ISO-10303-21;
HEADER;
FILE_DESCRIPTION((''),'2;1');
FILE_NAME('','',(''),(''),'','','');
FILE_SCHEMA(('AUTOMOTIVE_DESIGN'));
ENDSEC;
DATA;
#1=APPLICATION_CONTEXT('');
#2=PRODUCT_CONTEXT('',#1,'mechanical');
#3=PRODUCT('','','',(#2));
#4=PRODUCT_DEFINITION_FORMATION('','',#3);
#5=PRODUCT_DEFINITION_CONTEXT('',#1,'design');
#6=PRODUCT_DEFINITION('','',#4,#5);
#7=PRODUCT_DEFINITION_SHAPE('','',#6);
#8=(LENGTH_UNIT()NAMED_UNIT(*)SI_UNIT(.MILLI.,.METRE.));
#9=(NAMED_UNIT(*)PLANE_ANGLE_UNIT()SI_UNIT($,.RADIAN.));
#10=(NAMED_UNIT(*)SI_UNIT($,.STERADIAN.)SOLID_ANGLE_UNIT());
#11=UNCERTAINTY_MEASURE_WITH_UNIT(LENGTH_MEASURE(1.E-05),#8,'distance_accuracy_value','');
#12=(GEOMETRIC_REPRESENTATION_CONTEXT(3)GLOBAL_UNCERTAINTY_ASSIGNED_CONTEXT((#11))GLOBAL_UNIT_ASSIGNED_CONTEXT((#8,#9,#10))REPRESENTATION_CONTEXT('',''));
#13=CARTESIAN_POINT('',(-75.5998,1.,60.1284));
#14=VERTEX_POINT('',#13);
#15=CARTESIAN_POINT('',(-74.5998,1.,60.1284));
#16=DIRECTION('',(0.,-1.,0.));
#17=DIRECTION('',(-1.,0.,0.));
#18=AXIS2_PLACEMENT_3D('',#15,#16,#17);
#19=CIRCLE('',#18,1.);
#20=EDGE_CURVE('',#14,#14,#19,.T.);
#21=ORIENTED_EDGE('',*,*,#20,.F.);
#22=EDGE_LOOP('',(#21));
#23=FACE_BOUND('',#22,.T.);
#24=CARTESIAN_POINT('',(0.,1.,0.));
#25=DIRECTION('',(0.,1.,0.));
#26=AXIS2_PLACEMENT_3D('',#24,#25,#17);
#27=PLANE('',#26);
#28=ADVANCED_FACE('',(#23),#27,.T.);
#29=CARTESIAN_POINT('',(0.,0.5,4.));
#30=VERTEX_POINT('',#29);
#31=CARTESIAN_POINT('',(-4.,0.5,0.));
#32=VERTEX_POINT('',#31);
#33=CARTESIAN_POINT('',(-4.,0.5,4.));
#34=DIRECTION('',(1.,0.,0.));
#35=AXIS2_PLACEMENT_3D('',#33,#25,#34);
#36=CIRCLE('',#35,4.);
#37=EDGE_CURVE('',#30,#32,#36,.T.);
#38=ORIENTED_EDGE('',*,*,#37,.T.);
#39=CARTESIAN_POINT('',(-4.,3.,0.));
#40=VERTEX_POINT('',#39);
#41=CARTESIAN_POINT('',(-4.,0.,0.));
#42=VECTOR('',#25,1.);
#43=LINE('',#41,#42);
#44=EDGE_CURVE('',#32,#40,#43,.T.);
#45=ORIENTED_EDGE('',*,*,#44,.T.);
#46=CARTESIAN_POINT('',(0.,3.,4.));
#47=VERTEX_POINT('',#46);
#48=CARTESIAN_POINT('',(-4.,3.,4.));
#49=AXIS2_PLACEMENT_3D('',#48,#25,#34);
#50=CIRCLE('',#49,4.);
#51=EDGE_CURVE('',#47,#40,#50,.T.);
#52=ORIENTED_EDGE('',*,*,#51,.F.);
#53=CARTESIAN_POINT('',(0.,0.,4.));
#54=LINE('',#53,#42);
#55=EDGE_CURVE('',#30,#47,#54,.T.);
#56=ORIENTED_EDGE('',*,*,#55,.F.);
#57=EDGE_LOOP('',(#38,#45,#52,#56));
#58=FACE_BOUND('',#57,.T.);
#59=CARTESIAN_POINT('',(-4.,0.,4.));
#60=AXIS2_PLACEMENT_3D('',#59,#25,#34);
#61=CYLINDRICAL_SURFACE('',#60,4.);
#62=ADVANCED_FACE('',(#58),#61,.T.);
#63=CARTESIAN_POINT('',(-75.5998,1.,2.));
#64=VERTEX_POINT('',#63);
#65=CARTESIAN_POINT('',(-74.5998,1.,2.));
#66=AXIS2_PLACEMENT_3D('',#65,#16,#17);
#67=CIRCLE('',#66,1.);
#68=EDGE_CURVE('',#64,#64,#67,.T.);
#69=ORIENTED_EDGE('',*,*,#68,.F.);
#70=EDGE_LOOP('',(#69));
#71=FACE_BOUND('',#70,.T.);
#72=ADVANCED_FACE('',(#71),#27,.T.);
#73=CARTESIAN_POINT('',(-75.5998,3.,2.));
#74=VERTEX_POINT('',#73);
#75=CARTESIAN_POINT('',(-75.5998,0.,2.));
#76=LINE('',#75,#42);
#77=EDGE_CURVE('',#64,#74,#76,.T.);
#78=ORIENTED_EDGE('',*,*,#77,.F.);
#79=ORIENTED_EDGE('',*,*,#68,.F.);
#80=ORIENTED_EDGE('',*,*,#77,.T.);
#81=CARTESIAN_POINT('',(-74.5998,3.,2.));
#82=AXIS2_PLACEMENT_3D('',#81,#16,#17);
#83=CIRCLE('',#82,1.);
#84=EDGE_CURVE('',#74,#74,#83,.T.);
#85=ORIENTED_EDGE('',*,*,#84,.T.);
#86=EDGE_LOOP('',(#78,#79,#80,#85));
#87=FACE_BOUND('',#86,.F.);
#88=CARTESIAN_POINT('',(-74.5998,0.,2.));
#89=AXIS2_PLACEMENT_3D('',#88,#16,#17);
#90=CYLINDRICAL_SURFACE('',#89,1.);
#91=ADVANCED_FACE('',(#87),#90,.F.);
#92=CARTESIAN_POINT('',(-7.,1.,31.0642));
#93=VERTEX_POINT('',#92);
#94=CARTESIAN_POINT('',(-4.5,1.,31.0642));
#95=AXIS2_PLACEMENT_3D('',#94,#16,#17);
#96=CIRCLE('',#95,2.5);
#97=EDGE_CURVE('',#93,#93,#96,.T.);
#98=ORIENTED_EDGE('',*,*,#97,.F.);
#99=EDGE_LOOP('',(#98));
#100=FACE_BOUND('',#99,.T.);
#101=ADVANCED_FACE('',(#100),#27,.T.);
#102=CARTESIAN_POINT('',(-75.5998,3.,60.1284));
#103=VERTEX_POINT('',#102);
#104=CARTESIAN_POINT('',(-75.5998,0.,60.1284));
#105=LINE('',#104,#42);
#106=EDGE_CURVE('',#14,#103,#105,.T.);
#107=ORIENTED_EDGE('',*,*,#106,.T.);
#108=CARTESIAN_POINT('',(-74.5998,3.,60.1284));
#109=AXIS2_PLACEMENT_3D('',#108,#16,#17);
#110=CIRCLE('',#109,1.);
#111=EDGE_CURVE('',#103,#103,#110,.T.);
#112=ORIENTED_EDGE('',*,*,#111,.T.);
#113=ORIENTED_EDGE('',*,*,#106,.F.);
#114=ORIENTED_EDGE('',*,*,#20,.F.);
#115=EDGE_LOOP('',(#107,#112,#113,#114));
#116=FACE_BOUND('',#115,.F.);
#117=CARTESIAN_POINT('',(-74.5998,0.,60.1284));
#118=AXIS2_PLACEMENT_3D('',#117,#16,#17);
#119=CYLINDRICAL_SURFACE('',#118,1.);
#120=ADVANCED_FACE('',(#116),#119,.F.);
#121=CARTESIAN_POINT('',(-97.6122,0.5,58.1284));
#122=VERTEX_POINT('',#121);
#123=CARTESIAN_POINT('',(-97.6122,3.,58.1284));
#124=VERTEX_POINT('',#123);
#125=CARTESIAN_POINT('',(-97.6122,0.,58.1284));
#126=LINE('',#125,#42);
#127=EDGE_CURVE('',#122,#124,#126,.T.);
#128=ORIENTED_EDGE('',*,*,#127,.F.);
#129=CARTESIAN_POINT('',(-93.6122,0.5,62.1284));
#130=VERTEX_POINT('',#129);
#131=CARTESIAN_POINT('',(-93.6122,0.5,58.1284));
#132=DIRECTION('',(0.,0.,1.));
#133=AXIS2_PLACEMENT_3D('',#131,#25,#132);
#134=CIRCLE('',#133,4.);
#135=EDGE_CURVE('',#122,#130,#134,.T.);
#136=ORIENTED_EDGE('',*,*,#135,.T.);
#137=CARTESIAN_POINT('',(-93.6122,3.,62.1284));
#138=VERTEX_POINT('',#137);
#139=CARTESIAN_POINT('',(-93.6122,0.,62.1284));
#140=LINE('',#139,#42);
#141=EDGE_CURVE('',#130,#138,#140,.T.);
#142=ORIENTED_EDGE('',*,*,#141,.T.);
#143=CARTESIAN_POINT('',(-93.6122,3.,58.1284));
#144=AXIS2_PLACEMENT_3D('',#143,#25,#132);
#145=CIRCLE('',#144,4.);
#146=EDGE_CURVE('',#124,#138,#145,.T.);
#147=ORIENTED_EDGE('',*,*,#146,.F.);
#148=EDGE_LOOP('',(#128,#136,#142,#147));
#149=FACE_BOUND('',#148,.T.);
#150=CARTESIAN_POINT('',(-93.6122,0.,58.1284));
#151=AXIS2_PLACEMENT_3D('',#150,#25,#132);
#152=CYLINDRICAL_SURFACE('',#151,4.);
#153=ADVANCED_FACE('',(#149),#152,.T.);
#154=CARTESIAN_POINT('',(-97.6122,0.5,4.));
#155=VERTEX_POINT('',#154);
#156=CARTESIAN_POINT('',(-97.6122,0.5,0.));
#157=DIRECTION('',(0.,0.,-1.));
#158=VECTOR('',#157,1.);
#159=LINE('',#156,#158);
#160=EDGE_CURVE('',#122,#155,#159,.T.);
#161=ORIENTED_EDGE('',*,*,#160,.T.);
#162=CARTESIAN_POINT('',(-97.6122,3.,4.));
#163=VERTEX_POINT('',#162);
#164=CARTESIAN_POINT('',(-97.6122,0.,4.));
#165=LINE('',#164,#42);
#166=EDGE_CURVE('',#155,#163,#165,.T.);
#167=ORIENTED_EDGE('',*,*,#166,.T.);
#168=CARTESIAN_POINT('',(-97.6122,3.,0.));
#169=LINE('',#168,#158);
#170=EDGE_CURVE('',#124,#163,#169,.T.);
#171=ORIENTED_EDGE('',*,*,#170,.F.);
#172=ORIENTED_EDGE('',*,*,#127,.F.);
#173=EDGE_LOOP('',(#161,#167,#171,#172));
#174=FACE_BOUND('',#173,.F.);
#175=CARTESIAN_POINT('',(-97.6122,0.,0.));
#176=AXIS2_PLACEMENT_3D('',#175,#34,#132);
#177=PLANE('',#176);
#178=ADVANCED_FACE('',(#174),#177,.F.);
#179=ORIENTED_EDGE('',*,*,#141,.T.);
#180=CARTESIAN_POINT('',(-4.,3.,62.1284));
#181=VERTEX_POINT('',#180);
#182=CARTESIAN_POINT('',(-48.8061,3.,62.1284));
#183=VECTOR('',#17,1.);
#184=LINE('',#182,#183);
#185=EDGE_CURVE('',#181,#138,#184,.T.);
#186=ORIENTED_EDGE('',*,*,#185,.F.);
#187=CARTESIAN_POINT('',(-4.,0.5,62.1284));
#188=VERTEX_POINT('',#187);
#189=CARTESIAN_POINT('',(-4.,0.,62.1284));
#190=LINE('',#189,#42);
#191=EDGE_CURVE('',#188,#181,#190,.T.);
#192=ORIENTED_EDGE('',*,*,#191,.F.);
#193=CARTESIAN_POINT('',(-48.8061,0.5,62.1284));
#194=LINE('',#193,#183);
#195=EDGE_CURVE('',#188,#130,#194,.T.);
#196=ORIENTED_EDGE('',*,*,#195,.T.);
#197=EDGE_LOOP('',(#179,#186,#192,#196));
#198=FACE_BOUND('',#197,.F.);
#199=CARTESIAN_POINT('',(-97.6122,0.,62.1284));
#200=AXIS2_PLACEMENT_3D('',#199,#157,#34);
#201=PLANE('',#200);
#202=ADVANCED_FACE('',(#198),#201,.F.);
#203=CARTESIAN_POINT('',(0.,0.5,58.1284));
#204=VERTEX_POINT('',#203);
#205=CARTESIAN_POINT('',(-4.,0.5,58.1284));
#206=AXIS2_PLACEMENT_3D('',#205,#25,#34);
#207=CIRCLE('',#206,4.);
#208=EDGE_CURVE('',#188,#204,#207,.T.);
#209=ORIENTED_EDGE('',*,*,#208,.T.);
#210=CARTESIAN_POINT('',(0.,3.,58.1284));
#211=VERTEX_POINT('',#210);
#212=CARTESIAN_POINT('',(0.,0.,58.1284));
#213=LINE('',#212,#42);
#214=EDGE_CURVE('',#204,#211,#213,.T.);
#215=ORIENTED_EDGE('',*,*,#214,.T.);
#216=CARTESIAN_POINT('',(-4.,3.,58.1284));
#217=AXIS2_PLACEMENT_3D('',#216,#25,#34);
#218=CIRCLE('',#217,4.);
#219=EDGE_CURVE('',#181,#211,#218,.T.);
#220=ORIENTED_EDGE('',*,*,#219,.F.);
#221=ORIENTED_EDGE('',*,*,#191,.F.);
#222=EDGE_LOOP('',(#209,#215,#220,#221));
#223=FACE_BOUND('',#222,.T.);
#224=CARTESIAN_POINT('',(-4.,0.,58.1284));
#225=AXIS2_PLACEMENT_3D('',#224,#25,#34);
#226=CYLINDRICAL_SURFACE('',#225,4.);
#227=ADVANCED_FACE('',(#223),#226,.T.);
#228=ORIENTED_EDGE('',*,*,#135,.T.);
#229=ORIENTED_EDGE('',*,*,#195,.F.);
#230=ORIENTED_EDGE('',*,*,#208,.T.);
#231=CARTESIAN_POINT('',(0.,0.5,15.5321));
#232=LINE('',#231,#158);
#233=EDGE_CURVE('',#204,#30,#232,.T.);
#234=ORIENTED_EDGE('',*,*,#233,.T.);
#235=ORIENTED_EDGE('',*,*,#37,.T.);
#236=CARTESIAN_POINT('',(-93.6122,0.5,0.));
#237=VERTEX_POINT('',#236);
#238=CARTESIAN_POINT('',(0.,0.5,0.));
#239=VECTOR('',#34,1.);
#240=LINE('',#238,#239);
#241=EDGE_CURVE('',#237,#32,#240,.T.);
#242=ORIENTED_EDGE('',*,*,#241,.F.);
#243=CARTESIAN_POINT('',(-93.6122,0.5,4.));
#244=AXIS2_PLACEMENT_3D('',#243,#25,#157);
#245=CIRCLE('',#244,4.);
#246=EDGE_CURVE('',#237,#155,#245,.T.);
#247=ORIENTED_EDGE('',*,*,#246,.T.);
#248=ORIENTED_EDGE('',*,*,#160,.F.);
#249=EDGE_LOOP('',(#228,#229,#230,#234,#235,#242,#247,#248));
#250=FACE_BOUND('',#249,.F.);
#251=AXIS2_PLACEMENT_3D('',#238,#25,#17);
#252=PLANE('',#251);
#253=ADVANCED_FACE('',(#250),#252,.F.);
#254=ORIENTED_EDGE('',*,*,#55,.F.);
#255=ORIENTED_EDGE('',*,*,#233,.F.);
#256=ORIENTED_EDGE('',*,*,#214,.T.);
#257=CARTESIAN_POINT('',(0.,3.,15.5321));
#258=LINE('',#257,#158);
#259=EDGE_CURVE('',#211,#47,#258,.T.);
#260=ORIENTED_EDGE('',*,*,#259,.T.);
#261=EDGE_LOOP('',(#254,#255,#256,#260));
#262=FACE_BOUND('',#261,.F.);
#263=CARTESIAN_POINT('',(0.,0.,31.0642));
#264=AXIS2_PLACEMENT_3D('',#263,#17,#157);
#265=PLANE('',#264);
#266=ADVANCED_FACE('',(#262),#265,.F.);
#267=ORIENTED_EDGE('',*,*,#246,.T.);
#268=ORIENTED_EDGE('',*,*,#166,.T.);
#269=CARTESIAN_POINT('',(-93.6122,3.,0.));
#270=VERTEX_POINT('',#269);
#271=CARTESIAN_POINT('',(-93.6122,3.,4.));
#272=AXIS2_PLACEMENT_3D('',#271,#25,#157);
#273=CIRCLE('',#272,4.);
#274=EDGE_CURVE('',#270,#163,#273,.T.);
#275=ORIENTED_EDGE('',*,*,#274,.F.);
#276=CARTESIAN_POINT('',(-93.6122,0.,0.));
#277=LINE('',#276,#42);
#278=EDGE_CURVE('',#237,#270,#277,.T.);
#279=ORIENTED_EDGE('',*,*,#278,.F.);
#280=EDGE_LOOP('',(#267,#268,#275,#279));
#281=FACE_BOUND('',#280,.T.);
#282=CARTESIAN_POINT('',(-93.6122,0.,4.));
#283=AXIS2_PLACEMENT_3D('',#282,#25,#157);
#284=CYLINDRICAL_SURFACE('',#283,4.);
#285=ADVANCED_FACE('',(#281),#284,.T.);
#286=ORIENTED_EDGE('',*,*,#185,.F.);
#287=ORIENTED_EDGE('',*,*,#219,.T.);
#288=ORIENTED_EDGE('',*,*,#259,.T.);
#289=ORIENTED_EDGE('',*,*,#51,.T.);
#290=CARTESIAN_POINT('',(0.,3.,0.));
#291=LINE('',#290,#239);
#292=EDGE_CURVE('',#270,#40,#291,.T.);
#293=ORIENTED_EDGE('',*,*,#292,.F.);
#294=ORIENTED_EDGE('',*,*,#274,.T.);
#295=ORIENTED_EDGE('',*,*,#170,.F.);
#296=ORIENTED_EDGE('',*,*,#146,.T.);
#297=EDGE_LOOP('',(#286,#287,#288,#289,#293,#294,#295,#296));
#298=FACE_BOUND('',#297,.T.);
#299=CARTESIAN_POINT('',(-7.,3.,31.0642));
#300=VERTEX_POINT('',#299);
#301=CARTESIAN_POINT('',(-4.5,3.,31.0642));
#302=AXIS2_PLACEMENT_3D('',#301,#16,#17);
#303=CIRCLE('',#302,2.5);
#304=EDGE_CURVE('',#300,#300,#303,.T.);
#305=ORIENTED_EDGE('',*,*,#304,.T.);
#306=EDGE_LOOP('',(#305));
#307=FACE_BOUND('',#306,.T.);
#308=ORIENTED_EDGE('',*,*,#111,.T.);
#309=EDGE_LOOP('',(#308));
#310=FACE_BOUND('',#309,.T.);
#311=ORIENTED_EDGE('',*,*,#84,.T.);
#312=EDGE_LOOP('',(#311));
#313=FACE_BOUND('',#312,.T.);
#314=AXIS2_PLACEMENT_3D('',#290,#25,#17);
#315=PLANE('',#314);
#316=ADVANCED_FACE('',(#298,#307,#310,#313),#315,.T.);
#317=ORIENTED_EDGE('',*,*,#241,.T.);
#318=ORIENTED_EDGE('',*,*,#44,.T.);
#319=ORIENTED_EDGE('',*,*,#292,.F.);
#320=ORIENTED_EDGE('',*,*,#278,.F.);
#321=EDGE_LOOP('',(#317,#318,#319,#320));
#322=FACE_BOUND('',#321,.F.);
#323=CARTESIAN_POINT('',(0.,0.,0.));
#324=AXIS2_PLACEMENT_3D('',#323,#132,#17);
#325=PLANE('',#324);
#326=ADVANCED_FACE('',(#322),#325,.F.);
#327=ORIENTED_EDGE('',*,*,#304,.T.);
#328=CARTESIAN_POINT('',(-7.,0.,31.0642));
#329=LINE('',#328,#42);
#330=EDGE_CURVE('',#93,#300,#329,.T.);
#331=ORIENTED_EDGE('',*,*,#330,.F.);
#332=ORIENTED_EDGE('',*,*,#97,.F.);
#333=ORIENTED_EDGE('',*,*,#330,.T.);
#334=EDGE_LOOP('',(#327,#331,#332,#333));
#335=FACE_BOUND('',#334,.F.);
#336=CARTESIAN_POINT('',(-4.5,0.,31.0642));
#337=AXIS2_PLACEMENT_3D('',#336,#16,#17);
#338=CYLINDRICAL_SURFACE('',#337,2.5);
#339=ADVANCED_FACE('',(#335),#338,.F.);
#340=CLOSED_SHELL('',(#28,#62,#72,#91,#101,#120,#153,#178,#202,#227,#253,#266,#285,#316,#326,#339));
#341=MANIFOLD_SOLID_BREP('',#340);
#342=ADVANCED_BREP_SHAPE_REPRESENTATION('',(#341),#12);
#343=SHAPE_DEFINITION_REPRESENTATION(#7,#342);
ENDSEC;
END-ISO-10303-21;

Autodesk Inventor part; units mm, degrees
ref_plane "YZ Plane" through (0, 0, 0) normal (1, 0, 0) x (0, 1, 0)
ref_plane "XZ Plane" through (0, 0, 0) normal (0, 1, 0) x (-1, 0, 0)
ref_plane "XY Plane" through (0, 0, 0) normal (0, 0, 1) x (1, 0, 0)
sketch "Sketch1" plane through (0, 0, 0) normal (0, 1, 0) x (-1, 0, 0)
  line L0 (0, 0) -> (97.6122, 0)
  line L1 (97.6122, 0) -> (97.6122, 62.1284)
  line L2 (97.6122, 62.1284) -> (0, 62.1284)
  line L3 (0, 62.1284) -> (0, 0)
  line L4 (97.6122, 62.1284) -> (97.6122, 60.1284)
  line L5 (97.6122, 60.1284) -> (74.5998, 60.1284)
  circle A0 centre (74.5998, 60.1284) radius 1
  line L6 (0, 31.0642) -> (4.5, 31.0642)
  circle A1 centre (4.5, 31.0642) radius 2.5
  line L7 (4.5, 31.0642) -> (97.6122, 31.0642)
  circle A2 centre (74.5998, 2) radius 1
  dimension "d0" = 97.6122
  dimension "d1" = 62.1284
  dimension "d2" = 2
  dimension "d3" = 23.0124
  dimension "d4" = 2
  dimension "d5" = 4.5
  dimension "d6" = 5
extrude "Extrusion1" add sketch "Sketch1" along normal blind 3 contours L3 L6 A1 L7 L1 L0 | L3 L2 L1 L7 A1 L6
extrude "Extrusion2" add sketch "Sketch1" along normal blind 1 contours A1 L7 L6 | L6 L7 A1 | A0 | A2
fillet "Fillet1" radius 4 4 edges at (-97.6122, 1.5, 62.1284) (-97.6122, 1.5, 0) (0, 1.5, 0) (0, 1.5, 62.1284)
move faces "Move1" translate (0, 0.5, 0) faces at (-63.7415, 0, 20.7095)
properties part number "magnet card top"
